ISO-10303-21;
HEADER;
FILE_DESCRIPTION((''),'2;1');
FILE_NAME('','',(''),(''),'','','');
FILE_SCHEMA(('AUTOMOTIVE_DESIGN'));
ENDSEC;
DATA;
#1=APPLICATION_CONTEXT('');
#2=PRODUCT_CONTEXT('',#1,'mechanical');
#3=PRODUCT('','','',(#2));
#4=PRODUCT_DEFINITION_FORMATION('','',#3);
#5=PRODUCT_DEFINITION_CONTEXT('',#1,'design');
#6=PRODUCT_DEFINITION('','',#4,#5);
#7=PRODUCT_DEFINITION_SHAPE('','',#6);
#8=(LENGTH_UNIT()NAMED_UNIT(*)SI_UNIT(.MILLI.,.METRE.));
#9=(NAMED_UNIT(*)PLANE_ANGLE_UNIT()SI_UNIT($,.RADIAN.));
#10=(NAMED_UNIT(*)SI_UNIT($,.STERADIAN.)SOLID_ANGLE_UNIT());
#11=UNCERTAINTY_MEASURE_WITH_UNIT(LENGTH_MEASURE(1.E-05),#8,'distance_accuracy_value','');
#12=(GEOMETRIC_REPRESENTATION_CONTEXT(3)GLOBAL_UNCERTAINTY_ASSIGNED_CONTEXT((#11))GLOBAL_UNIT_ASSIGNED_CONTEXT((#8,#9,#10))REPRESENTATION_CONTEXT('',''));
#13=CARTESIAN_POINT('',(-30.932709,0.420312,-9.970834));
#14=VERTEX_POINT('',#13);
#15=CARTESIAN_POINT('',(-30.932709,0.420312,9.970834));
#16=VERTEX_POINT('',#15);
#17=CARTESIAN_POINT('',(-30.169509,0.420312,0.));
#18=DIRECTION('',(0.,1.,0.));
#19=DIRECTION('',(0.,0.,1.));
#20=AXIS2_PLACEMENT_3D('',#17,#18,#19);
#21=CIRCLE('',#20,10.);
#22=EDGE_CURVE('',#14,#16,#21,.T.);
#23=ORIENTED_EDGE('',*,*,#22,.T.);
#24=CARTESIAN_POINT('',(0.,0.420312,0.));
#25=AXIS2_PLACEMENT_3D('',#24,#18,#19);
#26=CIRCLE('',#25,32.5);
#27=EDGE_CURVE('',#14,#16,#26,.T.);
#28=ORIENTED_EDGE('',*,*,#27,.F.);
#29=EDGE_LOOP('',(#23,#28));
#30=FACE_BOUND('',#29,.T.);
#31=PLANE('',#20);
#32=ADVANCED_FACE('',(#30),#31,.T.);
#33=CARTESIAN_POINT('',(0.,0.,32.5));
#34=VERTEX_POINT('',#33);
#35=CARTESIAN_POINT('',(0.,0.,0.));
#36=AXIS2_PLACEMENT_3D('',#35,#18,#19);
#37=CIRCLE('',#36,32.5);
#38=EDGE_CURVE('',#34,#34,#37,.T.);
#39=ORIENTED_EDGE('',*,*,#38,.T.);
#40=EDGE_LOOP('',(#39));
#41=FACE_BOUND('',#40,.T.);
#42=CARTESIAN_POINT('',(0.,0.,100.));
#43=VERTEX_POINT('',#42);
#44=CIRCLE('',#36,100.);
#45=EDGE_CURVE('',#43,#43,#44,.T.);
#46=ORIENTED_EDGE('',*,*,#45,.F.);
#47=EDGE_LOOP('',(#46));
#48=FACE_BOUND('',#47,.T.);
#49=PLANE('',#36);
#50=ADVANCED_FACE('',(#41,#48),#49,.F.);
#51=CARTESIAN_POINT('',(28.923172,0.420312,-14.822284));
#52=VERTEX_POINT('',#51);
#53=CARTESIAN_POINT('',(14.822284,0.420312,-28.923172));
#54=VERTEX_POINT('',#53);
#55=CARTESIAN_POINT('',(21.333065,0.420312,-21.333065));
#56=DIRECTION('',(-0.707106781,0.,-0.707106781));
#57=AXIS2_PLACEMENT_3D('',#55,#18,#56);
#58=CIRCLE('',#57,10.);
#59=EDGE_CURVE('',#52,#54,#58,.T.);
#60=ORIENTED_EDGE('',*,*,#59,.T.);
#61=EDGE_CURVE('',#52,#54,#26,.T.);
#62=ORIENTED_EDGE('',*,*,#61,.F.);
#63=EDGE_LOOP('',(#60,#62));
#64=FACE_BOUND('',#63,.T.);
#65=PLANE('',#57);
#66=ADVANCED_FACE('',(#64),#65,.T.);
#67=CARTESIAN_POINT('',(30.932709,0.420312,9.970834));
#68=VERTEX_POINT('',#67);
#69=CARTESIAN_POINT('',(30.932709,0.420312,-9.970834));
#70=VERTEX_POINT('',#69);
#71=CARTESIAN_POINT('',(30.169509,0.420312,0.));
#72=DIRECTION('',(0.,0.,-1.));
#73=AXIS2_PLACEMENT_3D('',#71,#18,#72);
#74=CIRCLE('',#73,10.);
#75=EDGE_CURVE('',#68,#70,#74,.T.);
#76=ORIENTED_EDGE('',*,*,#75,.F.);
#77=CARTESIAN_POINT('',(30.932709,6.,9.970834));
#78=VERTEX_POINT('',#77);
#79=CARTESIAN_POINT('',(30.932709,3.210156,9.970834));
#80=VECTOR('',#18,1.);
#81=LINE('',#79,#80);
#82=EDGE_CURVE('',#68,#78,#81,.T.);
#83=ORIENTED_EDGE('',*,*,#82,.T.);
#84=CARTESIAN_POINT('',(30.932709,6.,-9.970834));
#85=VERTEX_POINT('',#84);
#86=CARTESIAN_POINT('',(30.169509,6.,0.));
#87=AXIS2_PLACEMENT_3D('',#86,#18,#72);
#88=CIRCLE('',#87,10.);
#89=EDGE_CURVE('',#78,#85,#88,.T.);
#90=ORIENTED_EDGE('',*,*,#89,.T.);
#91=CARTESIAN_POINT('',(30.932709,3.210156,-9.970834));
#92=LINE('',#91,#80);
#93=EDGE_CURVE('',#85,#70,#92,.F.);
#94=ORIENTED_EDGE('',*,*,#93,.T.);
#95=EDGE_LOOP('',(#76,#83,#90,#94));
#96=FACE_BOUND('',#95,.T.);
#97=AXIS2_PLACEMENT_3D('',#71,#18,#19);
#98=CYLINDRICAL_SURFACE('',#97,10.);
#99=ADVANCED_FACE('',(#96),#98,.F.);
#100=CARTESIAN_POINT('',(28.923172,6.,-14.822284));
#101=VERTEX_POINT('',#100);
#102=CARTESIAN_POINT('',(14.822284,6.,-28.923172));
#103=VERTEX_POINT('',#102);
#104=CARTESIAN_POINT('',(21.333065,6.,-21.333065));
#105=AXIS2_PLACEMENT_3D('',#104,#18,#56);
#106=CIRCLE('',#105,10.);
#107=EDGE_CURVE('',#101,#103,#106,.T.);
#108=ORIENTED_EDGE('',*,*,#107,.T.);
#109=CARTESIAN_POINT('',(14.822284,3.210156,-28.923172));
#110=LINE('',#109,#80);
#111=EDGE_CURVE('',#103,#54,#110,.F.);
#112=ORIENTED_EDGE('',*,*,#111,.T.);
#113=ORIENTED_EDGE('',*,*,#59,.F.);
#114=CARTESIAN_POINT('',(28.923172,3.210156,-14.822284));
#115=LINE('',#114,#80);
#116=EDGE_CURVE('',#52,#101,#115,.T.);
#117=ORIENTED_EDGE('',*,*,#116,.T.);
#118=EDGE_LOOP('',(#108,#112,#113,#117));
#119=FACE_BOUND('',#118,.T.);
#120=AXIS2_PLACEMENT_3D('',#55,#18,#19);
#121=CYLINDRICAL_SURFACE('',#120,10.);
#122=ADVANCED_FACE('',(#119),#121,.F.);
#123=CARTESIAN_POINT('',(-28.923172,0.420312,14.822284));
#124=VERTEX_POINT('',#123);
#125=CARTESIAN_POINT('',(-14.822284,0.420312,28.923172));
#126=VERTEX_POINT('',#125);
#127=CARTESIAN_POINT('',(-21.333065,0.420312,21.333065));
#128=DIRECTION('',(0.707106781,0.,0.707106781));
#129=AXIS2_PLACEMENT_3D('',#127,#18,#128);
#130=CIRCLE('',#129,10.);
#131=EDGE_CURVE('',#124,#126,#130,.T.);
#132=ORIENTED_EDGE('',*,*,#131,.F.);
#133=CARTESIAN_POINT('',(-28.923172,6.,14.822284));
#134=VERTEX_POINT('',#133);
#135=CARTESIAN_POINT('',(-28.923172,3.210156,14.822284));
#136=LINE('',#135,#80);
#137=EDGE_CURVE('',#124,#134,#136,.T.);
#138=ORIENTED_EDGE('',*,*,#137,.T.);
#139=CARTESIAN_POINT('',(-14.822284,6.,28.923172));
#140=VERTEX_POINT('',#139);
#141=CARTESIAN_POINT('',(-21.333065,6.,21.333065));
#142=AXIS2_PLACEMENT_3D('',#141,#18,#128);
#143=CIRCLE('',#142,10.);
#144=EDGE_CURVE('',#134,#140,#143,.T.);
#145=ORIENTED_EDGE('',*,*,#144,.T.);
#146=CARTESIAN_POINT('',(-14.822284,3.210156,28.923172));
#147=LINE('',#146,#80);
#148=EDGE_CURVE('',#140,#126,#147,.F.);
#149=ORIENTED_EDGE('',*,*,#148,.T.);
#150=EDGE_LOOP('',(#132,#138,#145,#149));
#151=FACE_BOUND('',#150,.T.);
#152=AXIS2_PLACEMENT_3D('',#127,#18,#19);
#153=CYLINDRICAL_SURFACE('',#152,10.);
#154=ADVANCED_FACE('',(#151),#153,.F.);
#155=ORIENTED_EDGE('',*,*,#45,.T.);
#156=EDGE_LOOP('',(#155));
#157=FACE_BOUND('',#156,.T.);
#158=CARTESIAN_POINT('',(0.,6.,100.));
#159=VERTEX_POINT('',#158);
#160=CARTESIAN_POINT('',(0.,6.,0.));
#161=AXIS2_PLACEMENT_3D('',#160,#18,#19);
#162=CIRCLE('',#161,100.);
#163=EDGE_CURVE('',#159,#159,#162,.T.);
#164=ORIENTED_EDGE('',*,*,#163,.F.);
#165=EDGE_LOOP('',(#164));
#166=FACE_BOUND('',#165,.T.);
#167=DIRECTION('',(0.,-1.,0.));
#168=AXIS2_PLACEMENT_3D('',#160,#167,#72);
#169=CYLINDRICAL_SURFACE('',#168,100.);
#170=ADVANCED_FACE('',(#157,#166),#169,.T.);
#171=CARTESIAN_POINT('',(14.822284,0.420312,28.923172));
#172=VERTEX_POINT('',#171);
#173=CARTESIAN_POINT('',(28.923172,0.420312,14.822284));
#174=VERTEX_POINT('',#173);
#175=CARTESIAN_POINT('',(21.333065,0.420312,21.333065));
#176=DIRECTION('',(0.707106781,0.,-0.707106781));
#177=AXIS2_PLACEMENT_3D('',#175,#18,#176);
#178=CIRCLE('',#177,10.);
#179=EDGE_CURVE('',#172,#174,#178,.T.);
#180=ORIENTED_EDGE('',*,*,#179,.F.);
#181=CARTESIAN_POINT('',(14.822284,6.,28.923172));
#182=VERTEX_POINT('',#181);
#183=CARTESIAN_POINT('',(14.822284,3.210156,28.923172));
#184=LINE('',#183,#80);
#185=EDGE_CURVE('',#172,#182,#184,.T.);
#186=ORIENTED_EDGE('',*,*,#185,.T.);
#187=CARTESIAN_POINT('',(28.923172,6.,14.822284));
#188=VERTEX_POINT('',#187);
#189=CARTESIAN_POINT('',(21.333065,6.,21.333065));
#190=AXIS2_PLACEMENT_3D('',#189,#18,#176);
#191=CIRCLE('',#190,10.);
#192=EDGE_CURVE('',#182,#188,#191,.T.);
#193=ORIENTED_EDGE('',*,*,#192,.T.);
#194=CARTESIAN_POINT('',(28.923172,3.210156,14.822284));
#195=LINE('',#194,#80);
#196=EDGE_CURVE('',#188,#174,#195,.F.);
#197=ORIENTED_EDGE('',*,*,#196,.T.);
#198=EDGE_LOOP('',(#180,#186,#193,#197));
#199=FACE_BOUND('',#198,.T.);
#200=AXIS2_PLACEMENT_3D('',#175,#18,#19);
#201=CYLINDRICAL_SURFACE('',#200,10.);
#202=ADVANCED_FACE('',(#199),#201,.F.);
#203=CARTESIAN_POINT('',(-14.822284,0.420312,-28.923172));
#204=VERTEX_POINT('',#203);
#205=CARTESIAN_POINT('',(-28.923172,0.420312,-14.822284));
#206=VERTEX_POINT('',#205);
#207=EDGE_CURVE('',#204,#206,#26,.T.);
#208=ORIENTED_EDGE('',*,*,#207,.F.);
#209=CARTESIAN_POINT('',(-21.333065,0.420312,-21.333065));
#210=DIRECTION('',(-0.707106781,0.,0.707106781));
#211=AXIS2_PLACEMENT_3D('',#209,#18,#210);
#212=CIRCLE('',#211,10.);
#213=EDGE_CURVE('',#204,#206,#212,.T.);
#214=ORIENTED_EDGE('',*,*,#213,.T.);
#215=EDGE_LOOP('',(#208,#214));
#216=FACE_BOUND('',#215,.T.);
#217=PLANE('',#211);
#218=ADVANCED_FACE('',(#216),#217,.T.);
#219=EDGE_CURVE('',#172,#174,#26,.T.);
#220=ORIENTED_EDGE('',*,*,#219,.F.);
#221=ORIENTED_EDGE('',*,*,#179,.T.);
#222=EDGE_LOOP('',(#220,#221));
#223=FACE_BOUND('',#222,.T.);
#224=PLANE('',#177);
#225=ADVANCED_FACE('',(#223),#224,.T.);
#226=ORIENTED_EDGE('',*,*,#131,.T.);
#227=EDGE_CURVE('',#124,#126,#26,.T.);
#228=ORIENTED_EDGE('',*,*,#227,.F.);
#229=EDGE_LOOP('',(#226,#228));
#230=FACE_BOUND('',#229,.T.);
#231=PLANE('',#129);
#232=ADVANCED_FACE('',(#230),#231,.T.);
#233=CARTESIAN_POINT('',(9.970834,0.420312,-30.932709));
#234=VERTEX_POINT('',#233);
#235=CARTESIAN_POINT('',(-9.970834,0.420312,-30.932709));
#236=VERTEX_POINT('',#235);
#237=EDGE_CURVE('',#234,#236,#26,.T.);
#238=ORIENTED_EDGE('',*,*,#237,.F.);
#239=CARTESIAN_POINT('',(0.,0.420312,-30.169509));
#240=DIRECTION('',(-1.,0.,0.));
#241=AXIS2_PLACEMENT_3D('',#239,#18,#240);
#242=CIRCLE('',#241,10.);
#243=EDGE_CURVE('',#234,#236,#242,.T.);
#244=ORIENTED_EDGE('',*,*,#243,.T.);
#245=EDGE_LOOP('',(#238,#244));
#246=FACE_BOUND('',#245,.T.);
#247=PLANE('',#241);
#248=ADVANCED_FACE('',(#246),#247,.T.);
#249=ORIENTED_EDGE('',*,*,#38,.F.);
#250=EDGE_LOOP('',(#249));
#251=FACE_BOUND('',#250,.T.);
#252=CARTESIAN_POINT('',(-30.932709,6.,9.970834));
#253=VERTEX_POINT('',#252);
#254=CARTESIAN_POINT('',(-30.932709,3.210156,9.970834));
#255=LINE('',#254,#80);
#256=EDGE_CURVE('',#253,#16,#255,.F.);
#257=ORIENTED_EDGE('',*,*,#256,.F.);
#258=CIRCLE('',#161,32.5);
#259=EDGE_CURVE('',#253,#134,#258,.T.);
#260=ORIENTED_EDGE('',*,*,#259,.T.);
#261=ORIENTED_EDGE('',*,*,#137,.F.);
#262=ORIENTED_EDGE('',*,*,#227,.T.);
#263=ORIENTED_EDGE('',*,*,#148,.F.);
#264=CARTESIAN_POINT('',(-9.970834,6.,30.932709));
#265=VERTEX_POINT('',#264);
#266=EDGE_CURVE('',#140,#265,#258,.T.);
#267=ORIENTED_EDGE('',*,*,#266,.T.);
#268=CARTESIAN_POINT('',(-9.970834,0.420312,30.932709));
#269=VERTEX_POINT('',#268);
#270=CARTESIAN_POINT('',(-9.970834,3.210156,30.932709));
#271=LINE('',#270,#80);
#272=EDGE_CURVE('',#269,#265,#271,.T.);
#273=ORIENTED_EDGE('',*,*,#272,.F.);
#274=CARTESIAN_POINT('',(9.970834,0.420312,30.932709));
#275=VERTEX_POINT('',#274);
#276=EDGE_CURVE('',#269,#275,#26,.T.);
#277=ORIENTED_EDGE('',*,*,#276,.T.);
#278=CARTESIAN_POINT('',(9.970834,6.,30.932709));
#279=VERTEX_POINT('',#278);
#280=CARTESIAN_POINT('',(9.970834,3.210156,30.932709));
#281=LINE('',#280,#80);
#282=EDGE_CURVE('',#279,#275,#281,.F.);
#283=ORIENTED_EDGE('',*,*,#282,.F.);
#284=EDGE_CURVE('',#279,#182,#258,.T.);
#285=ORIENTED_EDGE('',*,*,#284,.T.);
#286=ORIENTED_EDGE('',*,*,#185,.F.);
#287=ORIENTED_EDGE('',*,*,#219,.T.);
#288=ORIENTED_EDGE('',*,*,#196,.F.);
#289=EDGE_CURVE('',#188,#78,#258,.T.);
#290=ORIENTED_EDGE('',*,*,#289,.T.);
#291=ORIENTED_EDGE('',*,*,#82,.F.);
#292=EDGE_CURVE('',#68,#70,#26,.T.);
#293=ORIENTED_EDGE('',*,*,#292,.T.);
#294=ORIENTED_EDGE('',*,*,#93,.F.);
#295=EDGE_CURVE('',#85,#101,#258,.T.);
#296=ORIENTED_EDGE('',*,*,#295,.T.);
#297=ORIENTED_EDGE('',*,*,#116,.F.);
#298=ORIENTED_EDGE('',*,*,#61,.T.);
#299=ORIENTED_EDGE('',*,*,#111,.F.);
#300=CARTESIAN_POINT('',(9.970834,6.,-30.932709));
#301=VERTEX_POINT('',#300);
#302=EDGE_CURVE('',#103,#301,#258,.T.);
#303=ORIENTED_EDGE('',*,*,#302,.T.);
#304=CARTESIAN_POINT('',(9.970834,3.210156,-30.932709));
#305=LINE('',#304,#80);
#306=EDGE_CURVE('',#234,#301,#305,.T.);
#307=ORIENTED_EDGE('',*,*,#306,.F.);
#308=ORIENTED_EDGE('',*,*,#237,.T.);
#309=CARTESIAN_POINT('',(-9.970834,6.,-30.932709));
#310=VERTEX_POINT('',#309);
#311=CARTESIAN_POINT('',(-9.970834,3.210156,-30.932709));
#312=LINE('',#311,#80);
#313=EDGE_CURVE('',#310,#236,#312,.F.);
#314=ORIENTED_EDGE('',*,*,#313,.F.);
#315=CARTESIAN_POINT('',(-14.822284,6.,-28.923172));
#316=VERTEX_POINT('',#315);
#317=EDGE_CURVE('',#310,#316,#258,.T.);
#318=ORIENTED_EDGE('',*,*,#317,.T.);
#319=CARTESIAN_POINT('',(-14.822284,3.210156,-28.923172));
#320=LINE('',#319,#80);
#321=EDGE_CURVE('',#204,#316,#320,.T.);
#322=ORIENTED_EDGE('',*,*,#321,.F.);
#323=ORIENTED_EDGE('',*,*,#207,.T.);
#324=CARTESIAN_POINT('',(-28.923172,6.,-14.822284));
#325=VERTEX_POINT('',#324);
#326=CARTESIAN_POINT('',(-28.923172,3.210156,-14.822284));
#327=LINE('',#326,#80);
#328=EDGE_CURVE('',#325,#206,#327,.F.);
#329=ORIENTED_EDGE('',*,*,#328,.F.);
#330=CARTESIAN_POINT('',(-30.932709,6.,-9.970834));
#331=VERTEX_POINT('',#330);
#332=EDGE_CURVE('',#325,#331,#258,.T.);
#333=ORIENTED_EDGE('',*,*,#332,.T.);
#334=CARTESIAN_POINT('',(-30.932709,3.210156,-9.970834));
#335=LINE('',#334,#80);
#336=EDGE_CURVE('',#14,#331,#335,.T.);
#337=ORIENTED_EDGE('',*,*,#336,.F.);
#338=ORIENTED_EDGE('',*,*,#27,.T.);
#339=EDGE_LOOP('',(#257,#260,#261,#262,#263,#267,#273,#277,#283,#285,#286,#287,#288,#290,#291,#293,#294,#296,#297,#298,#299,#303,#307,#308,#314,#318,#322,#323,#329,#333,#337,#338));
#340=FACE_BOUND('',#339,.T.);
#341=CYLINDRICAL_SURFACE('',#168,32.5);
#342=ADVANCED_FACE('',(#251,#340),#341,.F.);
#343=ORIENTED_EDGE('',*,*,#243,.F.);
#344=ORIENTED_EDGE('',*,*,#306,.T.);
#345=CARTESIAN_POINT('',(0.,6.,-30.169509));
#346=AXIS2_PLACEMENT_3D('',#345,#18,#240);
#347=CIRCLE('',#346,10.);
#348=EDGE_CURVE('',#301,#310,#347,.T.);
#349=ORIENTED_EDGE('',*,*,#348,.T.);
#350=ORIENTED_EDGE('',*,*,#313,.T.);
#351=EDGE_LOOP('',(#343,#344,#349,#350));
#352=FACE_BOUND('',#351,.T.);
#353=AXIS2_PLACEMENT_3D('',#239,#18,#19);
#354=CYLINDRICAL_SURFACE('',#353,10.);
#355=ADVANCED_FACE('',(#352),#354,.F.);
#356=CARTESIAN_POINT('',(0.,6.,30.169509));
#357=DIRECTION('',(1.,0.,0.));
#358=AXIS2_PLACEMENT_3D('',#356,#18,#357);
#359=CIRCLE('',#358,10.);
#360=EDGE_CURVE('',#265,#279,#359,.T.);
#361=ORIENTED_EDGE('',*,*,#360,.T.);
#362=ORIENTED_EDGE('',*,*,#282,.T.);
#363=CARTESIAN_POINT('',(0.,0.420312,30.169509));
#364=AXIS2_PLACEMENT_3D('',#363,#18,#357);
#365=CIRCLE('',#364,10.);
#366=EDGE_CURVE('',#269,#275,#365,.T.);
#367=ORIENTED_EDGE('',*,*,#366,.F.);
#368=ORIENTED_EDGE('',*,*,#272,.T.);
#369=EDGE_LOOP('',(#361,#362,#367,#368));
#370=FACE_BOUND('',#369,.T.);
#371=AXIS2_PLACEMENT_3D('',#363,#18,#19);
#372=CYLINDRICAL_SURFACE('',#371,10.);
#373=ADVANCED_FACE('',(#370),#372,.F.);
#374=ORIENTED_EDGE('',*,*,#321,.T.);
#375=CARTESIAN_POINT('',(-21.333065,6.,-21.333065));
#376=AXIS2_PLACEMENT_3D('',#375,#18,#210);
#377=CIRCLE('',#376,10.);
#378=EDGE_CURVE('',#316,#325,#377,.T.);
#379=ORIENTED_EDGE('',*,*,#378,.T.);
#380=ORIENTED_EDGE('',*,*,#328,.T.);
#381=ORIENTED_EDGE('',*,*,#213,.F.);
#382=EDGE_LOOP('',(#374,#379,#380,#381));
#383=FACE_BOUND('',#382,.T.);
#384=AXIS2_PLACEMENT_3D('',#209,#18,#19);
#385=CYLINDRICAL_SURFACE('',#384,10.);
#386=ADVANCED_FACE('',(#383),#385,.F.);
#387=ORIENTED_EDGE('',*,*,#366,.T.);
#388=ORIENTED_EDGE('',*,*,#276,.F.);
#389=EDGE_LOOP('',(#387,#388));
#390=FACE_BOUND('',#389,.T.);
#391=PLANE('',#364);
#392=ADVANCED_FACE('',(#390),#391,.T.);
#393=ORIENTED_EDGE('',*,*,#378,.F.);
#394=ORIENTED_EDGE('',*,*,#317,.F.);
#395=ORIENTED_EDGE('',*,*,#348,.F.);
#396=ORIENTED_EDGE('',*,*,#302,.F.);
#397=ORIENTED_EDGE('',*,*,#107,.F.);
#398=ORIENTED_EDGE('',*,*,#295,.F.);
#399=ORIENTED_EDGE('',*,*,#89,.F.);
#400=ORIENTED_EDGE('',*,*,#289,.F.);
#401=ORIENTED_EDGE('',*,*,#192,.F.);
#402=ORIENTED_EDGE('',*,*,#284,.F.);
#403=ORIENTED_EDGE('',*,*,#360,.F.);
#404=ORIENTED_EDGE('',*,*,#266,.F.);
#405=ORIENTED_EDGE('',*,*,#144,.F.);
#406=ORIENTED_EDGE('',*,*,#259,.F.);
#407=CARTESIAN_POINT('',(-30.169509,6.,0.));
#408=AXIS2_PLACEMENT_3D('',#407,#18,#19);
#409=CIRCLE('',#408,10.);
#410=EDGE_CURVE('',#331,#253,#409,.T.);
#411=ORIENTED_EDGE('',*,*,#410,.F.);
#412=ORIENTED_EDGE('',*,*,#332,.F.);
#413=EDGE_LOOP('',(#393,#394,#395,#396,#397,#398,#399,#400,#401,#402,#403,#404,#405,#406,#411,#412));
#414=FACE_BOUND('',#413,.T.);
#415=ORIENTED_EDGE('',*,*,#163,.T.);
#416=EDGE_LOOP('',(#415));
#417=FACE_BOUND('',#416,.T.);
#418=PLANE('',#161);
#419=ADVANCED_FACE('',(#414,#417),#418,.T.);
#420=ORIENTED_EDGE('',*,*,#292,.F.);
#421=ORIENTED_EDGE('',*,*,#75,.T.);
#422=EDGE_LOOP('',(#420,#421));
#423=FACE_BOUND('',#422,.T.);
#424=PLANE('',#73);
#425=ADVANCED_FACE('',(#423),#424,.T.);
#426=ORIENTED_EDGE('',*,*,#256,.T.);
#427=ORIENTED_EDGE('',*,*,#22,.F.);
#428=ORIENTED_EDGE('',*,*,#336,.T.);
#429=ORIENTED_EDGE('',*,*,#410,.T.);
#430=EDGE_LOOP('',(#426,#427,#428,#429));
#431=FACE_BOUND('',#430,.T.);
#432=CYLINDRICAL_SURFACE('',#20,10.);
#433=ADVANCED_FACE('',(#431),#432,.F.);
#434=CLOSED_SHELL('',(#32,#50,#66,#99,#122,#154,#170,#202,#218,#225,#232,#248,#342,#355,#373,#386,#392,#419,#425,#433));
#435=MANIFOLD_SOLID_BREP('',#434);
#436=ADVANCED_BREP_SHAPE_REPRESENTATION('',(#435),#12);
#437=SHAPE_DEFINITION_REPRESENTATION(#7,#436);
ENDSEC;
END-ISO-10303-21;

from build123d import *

# Parameters (mm, degrees)
SKETCH1_R           = 100
BOSS_EXTRUDE1_DEPTH = 6
SKETCH2_R           = 32.5
CUT_EXTRUDE1_DEPTH  = 142.548578234
SKETCH3_R           = 10
CUT_EXTRUDE2_DEPTH  = 5.5796884
CIRPATTERN1_COUNT   = 8


with BuildPart() as part:
    # Sketch1 → Boss-Extrude1 (new body)
    with BuildSketch(Plane(origin=(0, 0, 0), x_dir=(1, 0, 0), z_dir=(0, 1, 0))):
        Circle(SKETCH1_R)
    extrude(amount=BOSS_EXTRUDE1_DEPTH)

    # Sketch2 → Cut-Extrude1 (cut, through all)
    with BuildSketch(Plane(origin=(0, 0, 0), x_dir=(1, 0, 0), z_dir=(0, 1, 0))):
        Circle(SKETCH2_R)
    extrude(amount=CUT_EXTRUDE1_DEPTH, mode=Mode.SUBTRACT)

    # Sketch3 → Cut-Extrude2 (cut)
    with BuildSketch(Plane(origin=(0, 6, 0), x_dir=(1, 0, 0), z_dir=(0, 1, 0))):
        with Locations((-30.169509427, 0)):
            Circle(SKETCH3_R)
    cut_extrude2 = extrude(amount=-CUT_EXTRUDE2_DEPTH, mode=Mode.SUBTRACT)

    # CirPattern1: Cut-Extrude2 ×8 about axis
    cirpattern1_axis = Axis((0, 0, 0), (0, 1, 0))
    for i in range(1, CIRPATTERN1_COUNT):
        add(cut_extrude2.rotate(cirpattern1_axis, i * 360 / CIRPATTERN1_COUNT), mode=Mode.SUBTRACT)


solid = part.part
